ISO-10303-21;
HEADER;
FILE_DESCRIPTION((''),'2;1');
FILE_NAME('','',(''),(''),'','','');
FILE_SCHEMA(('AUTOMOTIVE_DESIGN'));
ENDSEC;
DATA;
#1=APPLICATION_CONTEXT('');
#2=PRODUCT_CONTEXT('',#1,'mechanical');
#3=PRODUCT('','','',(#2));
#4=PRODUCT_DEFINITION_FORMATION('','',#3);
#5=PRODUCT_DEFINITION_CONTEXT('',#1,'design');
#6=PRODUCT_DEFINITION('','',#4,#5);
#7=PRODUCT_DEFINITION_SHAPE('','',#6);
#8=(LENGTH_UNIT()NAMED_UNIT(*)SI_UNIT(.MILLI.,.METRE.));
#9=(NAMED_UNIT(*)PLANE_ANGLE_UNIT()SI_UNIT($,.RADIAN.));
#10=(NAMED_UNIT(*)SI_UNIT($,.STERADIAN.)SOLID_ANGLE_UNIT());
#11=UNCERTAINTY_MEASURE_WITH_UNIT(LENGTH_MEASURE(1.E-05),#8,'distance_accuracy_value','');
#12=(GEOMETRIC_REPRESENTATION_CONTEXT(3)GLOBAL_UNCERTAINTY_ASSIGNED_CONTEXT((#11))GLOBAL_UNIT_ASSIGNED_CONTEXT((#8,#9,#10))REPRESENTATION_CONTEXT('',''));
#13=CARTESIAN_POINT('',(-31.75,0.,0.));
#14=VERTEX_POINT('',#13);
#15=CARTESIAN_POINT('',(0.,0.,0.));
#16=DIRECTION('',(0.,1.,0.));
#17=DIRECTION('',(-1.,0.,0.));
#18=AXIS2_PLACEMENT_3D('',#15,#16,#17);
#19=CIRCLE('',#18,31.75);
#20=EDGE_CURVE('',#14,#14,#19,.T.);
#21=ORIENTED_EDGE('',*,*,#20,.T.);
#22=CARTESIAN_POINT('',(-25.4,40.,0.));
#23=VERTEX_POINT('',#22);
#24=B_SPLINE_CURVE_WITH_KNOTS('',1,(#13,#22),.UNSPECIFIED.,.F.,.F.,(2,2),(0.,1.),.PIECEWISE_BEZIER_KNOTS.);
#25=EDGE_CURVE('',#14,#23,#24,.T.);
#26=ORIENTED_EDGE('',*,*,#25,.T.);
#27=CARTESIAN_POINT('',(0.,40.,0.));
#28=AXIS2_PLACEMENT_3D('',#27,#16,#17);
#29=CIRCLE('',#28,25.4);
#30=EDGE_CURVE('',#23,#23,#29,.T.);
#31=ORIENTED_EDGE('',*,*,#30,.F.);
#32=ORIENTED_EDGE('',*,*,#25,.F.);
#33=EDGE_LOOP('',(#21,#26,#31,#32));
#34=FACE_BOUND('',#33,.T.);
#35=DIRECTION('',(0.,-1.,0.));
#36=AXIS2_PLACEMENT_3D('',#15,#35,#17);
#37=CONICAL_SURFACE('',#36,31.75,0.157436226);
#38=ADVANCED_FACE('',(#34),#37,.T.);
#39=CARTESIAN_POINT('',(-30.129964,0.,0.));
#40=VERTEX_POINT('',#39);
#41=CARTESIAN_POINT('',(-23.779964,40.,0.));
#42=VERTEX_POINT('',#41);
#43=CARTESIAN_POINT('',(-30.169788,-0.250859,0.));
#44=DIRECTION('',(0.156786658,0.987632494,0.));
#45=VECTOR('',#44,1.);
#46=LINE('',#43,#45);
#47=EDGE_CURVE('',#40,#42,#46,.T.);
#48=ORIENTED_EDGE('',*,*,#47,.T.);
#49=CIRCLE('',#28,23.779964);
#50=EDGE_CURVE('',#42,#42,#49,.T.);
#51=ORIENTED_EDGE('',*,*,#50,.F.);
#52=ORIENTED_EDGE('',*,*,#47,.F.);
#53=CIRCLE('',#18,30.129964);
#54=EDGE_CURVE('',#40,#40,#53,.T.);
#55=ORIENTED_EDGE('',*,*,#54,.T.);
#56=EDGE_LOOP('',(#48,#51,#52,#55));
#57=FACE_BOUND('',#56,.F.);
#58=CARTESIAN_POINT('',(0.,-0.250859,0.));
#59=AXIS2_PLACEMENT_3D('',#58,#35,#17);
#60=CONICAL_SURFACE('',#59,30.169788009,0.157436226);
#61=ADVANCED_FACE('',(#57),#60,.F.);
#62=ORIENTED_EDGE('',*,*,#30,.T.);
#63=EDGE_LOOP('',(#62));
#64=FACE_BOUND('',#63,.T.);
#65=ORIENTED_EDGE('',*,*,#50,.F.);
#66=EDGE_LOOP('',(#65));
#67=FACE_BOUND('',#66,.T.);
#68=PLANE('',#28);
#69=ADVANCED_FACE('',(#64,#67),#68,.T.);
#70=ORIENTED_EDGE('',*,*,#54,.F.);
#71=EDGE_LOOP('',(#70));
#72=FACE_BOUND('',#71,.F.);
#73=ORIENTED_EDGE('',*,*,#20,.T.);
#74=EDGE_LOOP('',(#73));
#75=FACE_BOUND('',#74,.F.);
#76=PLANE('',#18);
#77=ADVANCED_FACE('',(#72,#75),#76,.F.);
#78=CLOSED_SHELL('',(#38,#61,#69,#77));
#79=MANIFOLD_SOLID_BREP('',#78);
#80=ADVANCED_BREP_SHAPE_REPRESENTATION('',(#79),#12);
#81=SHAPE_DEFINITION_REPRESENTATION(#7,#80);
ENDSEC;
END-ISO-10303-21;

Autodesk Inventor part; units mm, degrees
ref_plane "YZ Plane" through (0, 0, 0) normal (1, 0, 0) x (0, 1, 0)
ref_plane "XY Plane" through (0, 0, 0) normal (0, 0, 1) x (1, 0, 0)
sketch "Szkic6" plane through (0, 0, 0) normal (0, 1, 0) x (-1, 0, 0)
  circle A0 centre (0, 0) radius 31.75
  dimension "d33" = 63.5
ref_plane "Płaszczyzna konstrukcyjna1" through (0, 40, 0) normal (0, 1, 0) x (-1, 0, 0)
sketch "Szkic7" plane through (0, 40, 0) normal (0, 1, 0) x (-1, 0, 0)
  circle A0 centre (0, 0) radius 25.4
  dimension "d35" = 50.8
loft "Wyciągnięcie złożone1" add profiles "Szkic6", "Szkic7"
shell "Skorupa1" thickness 1.6 removed faces 2 at (7.2508, 40, -1.9085) at (14.3997, 0, 5.5289)
equation "\"d33\" = OD1"
equation "\"d35\" = OD2"
equation "\"d52\" = THK"
equation "\"SzerokośćGięciaPodcięcia\" = Grubość"
equation "\"RozmiarPodcięciaNarożnika\" = 4 * Grubość"
equation "\"PromieńPrzejścia\" = PromieńGięcia"
equation "\"Rozmiar_promienia_Jacobiego\" = PromieńGięcia"
equation "\"Wielk_odstępu\" = Grubość"
equation "\"d2\" = PromieńGięcia"
equation "\"d23\" = PromieńGięcia"
equation "\"OD1\" = 63.5"
equation "\"OD2\" = 50.8"
equation "\"THK\" = 1.6"
equation "\"Grubość\" = 1.5"
equation "\"PromieńGięcia\" = 3"
properties part number "Redukcja symetryczna Ø63,5x50,8x1,6 L=40" material "304"
